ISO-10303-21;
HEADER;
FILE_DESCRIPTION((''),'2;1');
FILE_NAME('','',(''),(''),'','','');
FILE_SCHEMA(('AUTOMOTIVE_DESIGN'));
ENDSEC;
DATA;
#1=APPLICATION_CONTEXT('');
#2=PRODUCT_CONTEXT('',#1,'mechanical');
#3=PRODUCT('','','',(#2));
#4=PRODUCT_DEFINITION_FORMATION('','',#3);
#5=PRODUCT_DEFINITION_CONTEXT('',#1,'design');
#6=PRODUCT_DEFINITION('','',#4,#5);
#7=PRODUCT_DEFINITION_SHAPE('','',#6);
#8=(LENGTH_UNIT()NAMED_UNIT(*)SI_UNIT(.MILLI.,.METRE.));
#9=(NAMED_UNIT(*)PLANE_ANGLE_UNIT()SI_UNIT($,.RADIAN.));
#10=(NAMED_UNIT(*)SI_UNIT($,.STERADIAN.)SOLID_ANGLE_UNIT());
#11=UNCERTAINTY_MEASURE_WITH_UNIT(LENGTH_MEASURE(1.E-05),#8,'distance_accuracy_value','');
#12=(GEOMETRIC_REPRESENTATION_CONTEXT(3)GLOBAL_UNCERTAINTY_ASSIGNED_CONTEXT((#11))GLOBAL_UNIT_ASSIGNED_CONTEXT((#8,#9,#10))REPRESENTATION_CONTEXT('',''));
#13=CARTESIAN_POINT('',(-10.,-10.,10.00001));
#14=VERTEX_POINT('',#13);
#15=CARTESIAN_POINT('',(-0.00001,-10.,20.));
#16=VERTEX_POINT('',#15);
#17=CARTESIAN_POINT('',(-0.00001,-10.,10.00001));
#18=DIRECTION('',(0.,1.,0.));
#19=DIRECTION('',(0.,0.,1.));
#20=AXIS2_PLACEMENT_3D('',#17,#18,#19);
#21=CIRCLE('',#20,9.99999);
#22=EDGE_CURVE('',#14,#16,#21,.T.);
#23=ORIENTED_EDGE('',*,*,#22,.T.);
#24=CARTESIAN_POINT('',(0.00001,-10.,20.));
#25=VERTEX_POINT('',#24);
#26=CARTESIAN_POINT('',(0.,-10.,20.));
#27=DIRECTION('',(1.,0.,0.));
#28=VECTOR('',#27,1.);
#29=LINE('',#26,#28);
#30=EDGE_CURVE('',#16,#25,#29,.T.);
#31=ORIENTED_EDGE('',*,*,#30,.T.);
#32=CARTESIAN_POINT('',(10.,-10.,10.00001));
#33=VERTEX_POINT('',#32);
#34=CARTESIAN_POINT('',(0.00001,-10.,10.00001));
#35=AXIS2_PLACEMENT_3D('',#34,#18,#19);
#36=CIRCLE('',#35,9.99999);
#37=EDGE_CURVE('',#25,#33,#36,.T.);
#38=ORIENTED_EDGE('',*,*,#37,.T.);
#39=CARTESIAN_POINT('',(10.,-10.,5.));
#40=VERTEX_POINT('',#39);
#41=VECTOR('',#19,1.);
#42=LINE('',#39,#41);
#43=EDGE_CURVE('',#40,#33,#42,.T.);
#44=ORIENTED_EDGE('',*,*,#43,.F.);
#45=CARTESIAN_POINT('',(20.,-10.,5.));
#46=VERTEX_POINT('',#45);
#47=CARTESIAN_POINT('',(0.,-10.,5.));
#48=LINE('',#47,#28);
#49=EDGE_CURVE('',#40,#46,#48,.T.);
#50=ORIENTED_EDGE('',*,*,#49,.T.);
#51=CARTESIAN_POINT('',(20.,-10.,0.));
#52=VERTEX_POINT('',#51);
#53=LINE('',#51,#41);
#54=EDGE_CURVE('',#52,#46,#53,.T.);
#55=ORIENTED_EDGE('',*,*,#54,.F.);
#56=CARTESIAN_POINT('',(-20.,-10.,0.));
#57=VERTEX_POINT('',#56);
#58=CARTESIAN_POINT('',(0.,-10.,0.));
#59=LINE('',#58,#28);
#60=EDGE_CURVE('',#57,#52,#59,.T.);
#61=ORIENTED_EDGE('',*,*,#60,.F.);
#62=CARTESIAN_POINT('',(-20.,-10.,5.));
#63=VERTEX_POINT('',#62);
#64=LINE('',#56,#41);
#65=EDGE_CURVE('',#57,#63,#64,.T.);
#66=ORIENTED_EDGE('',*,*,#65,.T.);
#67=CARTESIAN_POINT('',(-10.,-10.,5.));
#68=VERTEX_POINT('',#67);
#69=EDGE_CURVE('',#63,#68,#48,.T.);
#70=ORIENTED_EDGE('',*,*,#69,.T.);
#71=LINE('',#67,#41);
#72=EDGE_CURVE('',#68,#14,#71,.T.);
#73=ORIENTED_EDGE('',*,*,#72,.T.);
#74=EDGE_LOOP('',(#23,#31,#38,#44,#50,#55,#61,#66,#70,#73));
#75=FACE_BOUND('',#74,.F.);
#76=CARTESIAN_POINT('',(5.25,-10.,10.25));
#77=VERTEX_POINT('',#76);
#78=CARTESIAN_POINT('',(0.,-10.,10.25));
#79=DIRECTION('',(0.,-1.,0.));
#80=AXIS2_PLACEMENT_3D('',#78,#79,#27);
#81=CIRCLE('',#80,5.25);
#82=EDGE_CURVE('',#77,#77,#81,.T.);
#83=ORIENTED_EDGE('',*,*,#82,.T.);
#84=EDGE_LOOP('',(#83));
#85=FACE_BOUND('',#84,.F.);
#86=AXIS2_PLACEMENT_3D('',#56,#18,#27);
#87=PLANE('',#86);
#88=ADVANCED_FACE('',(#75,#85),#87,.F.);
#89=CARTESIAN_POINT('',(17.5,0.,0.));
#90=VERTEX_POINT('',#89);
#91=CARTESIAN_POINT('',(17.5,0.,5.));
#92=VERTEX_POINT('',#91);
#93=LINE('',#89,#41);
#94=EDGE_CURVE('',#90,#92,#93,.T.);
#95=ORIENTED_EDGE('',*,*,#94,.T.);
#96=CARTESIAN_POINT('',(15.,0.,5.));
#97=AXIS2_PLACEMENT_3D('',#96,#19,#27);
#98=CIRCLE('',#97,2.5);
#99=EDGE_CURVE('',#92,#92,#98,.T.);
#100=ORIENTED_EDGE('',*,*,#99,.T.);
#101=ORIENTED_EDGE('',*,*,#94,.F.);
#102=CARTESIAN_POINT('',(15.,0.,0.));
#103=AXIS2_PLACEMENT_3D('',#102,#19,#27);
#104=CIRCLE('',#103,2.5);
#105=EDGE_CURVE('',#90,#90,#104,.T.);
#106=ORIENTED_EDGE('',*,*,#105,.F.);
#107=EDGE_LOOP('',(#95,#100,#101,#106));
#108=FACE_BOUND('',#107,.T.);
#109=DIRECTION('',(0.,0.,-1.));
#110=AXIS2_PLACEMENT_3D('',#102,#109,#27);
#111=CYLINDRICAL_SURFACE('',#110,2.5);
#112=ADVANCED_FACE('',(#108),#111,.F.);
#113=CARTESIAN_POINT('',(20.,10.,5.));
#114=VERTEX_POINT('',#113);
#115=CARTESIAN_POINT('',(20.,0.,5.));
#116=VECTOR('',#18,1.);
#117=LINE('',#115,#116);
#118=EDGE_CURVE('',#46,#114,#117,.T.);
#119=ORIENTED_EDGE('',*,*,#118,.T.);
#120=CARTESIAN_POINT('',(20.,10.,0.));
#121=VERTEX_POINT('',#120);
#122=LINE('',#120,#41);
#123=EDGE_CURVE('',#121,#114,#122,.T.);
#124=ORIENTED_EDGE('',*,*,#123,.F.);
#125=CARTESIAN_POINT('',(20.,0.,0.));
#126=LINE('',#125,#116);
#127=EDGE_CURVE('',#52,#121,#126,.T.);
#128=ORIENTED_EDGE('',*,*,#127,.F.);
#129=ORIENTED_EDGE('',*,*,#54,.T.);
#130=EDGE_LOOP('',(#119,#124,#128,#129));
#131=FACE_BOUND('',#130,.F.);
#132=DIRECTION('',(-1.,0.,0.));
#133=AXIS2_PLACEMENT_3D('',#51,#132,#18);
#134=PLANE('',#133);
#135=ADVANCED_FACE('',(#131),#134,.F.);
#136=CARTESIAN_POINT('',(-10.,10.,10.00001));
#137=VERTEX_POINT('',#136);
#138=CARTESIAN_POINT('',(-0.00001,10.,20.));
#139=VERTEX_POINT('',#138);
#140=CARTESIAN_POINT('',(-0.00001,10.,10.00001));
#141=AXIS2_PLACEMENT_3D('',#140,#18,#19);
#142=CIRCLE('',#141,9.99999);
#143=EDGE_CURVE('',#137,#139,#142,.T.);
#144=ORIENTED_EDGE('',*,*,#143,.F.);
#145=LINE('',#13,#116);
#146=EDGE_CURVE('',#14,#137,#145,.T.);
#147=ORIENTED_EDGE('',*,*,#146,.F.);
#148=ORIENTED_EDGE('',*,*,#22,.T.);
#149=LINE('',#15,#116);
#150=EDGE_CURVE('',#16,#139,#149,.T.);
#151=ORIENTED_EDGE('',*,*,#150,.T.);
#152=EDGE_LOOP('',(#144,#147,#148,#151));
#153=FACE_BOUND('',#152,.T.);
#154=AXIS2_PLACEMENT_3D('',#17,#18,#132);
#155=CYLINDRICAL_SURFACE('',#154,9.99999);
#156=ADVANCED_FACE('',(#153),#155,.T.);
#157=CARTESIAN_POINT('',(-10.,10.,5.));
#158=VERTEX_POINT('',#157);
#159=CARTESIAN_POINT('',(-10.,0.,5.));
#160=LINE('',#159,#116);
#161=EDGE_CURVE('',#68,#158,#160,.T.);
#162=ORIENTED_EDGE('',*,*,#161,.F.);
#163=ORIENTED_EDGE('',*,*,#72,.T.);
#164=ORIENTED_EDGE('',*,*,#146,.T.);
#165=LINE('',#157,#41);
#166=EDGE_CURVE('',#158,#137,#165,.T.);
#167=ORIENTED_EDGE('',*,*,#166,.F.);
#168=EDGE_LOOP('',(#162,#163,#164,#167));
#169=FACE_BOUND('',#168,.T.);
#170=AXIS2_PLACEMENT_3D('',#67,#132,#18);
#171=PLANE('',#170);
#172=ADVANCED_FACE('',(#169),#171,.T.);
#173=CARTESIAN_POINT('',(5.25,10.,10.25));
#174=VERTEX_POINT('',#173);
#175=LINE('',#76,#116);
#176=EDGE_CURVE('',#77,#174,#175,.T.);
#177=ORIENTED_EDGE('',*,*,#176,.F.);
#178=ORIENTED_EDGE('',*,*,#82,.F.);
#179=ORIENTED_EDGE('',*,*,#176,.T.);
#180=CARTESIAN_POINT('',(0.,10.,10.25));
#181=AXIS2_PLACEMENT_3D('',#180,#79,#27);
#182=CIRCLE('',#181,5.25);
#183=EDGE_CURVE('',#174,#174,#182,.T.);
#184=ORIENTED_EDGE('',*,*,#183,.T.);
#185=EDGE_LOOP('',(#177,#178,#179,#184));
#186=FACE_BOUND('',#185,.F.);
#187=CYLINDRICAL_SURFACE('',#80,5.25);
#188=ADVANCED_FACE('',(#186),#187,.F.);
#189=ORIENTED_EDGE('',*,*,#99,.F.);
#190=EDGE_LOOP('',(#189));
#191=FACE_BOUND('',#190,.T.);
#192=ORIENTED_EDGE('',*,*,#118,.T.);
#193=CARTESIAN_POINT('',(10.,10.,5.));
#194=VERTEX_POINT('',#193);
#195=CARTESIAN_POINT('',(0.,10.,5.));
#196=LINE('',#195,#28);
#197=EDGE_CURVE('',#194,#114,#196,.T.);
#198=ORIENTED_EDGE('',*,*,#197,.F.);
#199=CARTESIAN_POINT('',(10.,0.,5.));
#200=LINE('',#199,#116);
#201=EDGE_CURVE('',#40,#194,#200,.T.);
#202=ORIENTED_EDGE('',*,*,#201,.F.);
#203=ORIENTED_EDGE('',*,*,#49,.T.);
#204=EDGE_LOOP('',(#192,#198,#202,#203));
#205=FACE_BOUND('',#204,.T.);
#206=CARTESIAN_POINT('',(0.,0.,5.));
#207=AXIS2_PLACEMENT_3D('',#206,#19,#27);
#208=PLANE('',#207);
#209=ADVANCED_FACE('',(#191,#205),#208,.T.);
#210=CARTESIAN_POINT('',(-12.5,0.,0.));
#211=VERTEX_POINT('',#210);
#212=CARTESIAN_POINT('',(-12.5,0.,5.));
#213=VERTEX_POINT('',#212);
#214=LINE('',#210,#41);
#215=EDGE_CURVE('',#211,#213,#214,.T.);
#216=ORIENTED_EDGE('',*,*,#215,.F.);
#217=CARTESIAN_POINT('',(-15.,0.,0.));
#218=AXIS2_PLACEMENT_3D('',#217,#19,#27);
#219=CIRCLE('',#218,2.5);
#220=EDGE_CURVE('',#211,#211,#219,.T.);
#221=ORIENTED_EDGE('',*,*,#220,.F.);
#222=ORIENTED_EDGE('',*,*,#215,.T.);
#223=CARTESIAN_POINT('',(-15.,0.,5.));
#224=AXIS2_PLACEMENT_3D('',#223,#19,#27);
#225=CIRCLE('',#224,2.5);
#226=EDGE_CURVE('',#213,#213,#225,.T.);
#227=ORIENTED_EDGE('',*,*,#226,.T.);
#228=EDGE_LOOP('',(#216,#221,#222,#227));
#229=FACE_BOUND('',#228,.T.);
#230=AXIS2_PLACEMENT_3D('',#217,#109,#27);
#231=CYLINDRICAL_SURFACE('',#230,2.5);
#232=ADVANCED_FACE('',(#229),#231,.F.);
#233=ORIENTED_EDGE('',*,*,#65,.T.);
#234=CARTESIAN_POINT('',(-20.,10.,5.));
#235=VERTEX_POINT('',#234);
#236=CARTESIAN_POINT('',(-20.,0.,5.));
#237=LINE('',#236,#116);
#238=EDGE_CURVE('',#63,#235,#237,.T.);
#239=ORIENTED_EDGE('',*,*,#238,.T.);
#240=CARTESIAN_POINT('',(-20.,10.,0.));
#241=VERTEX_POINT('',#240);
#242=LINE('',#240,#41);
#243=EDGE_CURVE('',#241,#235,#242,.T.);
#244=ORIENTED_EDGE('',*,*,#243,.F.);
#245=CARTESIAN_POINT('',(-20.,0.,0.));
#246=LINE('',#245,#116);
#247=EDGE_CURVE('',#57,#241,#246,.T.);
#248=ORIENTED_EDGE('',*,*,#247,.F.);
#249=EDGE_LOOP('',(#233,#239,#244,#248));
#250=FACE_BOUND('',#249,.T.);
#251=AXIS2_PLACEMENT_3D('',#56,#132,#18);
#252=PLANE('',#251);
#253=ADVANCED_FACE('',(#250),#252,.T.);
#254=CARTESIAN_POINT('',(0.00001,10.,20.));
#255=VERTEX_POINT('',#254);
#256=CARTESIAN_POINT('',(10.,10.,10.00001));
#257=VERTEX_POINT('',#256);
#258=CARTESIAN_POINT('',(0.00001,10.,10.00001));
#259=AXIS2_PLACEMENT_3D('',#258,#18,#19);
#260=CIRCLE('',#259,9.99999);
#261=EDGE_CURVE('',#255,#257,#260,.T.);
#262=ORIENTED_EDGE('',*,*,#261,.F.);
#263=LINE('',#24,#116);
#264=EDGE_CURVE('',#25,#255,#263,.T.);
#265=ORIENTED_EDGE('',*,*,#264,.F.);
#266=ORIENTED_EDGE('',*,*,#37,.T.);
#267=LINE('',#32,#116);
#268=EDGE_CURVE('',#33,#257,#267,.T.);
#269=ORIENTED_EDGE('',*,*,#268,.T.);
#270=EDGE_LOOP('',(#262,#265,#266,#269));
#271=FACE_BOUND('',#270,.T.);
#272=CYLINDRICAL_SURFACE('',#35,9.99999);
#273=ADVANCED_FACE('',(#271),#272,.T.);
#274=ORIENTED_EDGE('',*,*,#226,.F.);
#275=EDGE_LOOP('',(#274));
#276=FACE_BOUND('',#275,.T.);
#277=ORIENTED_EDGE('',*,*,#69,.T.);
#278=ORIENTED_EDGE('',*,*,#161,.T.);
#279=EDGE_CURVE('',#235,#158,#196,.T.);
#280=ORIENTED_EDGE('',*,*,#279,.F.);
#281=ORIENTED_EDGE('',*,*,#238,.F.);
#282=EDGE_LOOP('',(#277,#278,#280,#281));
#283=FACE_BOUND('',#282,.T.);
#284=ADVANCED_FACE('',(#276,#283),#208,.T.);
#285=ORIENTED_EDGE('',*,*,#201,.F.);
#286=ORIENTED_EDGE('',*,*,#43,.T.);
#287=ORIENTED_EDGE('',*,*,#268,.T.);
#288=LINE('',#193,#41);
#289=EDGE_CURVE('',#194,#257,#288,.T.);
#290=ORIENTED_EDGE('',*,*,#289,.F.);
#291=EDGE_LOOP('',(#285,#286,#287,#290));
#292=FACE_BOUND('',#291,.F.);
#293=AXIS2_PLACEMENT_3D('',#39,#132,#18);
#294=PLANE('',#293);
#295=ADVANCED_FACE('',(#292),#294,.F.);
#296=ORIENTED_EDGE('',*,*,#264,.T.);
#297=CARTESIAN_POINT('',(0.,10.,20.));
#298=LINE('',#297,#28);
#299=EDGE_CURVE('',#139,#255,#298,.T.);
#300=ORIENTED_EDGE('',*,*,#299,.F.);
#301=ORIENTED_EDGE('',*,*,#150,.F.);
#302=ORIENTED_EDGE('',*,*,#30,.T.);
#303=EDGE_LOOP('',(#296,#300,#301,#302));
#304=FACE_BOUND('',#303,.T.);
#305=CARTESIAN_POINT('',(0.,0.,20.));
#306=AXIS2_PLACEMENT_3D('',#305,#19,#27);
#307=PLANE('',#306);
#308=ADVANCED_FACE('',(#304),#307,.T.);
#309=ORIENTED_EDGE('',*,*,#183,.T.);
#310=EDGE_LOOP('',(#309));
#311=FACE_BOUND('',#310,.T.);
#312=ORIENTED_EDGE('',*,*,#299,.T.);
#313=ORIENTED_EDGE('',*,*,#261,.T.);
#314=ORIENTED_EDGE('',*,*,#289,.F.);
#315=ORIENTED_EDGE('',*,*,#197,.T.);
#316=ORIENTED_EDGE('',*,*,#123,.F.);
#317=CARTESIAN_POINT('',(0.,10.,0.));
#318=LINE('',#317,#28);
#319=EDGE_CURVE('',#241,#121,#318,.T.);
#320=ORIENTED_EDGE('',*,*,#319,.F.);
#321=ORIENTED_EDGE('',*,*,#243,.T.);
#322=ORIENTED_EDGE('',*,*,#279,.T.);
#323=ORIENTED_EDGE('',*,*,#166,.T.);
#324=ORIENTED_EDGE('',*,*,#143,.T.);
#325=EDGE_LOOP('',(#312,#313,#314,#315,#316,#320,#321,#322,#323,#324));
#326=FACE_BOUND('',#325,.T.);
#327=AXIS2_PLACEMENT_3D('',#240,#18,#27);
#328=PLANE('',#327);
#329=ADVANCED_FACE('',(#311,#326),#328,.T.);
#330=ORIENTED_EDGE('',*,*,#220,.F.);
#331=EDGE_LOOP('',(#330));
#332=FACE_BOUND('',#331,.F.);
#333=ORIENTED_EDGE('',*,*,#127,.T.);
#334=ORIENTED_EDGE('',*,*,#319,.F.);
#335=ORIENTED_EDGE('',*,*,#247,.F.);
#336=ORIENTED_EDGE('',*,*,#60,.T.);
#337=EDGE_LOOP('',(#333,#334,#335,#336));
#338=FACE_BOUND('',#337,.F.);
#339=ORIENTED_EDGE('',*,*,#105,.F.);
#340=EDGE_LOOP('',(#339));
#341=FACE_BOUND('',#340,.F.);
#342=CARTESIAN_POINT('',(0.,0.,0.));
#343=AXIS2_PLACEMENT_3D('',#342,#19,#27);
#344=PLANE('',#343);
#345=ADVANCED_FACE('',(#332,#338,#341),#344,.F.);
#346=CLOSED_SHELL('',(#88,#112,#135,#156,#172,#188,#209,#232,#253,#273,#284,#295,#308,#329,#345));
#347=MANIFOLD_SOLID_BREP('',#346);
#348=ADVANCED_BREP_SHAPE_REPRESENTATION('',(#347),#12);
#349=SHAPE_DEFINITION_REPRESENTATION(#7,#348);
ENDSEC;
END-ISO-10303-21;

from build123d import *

# Parameters (mm, degrees)
F0_W     = 40
F0_H     = 20
F0_R     = 2.5
F1_DEPTH = 5
F2_W     = 20
F2_H     = 20
F3_DEPTH = 15
F4_R     = 5.25
F5_DEPTH = 25
F6_R     = 9.99999


# Not quite as in the source:
# - a fillet or chamfer is up to 0.001 mm smaller than in the source, because OpenCascade refuses the exact size


with BuildPart() as f1:
    # F0 (on Top) → F1 (new body)
    with BuildSketch(Plane.XY):
        Rectangle(F0_W, F0_H)
        with Locations((-15, 0)):
            Circle(F0_R, mode=Mode.SUBTRACT)
        with Locations((15, 0)):
            Circle(F0_R, mode=Mode.SUBTRACT)
    extrude(amount=F1_DEPTH)

    # F2 (on face) → F3 (join)
    with BuildSketch(Plane.XY.offset(5)):
        Rectangle(F2_W, F2_H)
    extrude(amount=F3_DEPTH)

    # F4 (on face) → F5 (cut)
    with BuildSketch(Plane.XZ.offset(10)):
        with Locations((0, 10.25)):
            Circle(F4_R)
    extrude(amount=-F5_DEPTH, mode=Mode.SUBTRACT)

    # F6 (radius 10 in the source; OpenCascade refuses exactly that, so slightly less here)
    f6_edges = [f1.edges().sort_by_distance(p)[0] for p in [
        (-10, 0, 20),
        (10, 0, 20),
    ]]
    fillet(f6_edges, radius=F6_R)


solid = f1.part
